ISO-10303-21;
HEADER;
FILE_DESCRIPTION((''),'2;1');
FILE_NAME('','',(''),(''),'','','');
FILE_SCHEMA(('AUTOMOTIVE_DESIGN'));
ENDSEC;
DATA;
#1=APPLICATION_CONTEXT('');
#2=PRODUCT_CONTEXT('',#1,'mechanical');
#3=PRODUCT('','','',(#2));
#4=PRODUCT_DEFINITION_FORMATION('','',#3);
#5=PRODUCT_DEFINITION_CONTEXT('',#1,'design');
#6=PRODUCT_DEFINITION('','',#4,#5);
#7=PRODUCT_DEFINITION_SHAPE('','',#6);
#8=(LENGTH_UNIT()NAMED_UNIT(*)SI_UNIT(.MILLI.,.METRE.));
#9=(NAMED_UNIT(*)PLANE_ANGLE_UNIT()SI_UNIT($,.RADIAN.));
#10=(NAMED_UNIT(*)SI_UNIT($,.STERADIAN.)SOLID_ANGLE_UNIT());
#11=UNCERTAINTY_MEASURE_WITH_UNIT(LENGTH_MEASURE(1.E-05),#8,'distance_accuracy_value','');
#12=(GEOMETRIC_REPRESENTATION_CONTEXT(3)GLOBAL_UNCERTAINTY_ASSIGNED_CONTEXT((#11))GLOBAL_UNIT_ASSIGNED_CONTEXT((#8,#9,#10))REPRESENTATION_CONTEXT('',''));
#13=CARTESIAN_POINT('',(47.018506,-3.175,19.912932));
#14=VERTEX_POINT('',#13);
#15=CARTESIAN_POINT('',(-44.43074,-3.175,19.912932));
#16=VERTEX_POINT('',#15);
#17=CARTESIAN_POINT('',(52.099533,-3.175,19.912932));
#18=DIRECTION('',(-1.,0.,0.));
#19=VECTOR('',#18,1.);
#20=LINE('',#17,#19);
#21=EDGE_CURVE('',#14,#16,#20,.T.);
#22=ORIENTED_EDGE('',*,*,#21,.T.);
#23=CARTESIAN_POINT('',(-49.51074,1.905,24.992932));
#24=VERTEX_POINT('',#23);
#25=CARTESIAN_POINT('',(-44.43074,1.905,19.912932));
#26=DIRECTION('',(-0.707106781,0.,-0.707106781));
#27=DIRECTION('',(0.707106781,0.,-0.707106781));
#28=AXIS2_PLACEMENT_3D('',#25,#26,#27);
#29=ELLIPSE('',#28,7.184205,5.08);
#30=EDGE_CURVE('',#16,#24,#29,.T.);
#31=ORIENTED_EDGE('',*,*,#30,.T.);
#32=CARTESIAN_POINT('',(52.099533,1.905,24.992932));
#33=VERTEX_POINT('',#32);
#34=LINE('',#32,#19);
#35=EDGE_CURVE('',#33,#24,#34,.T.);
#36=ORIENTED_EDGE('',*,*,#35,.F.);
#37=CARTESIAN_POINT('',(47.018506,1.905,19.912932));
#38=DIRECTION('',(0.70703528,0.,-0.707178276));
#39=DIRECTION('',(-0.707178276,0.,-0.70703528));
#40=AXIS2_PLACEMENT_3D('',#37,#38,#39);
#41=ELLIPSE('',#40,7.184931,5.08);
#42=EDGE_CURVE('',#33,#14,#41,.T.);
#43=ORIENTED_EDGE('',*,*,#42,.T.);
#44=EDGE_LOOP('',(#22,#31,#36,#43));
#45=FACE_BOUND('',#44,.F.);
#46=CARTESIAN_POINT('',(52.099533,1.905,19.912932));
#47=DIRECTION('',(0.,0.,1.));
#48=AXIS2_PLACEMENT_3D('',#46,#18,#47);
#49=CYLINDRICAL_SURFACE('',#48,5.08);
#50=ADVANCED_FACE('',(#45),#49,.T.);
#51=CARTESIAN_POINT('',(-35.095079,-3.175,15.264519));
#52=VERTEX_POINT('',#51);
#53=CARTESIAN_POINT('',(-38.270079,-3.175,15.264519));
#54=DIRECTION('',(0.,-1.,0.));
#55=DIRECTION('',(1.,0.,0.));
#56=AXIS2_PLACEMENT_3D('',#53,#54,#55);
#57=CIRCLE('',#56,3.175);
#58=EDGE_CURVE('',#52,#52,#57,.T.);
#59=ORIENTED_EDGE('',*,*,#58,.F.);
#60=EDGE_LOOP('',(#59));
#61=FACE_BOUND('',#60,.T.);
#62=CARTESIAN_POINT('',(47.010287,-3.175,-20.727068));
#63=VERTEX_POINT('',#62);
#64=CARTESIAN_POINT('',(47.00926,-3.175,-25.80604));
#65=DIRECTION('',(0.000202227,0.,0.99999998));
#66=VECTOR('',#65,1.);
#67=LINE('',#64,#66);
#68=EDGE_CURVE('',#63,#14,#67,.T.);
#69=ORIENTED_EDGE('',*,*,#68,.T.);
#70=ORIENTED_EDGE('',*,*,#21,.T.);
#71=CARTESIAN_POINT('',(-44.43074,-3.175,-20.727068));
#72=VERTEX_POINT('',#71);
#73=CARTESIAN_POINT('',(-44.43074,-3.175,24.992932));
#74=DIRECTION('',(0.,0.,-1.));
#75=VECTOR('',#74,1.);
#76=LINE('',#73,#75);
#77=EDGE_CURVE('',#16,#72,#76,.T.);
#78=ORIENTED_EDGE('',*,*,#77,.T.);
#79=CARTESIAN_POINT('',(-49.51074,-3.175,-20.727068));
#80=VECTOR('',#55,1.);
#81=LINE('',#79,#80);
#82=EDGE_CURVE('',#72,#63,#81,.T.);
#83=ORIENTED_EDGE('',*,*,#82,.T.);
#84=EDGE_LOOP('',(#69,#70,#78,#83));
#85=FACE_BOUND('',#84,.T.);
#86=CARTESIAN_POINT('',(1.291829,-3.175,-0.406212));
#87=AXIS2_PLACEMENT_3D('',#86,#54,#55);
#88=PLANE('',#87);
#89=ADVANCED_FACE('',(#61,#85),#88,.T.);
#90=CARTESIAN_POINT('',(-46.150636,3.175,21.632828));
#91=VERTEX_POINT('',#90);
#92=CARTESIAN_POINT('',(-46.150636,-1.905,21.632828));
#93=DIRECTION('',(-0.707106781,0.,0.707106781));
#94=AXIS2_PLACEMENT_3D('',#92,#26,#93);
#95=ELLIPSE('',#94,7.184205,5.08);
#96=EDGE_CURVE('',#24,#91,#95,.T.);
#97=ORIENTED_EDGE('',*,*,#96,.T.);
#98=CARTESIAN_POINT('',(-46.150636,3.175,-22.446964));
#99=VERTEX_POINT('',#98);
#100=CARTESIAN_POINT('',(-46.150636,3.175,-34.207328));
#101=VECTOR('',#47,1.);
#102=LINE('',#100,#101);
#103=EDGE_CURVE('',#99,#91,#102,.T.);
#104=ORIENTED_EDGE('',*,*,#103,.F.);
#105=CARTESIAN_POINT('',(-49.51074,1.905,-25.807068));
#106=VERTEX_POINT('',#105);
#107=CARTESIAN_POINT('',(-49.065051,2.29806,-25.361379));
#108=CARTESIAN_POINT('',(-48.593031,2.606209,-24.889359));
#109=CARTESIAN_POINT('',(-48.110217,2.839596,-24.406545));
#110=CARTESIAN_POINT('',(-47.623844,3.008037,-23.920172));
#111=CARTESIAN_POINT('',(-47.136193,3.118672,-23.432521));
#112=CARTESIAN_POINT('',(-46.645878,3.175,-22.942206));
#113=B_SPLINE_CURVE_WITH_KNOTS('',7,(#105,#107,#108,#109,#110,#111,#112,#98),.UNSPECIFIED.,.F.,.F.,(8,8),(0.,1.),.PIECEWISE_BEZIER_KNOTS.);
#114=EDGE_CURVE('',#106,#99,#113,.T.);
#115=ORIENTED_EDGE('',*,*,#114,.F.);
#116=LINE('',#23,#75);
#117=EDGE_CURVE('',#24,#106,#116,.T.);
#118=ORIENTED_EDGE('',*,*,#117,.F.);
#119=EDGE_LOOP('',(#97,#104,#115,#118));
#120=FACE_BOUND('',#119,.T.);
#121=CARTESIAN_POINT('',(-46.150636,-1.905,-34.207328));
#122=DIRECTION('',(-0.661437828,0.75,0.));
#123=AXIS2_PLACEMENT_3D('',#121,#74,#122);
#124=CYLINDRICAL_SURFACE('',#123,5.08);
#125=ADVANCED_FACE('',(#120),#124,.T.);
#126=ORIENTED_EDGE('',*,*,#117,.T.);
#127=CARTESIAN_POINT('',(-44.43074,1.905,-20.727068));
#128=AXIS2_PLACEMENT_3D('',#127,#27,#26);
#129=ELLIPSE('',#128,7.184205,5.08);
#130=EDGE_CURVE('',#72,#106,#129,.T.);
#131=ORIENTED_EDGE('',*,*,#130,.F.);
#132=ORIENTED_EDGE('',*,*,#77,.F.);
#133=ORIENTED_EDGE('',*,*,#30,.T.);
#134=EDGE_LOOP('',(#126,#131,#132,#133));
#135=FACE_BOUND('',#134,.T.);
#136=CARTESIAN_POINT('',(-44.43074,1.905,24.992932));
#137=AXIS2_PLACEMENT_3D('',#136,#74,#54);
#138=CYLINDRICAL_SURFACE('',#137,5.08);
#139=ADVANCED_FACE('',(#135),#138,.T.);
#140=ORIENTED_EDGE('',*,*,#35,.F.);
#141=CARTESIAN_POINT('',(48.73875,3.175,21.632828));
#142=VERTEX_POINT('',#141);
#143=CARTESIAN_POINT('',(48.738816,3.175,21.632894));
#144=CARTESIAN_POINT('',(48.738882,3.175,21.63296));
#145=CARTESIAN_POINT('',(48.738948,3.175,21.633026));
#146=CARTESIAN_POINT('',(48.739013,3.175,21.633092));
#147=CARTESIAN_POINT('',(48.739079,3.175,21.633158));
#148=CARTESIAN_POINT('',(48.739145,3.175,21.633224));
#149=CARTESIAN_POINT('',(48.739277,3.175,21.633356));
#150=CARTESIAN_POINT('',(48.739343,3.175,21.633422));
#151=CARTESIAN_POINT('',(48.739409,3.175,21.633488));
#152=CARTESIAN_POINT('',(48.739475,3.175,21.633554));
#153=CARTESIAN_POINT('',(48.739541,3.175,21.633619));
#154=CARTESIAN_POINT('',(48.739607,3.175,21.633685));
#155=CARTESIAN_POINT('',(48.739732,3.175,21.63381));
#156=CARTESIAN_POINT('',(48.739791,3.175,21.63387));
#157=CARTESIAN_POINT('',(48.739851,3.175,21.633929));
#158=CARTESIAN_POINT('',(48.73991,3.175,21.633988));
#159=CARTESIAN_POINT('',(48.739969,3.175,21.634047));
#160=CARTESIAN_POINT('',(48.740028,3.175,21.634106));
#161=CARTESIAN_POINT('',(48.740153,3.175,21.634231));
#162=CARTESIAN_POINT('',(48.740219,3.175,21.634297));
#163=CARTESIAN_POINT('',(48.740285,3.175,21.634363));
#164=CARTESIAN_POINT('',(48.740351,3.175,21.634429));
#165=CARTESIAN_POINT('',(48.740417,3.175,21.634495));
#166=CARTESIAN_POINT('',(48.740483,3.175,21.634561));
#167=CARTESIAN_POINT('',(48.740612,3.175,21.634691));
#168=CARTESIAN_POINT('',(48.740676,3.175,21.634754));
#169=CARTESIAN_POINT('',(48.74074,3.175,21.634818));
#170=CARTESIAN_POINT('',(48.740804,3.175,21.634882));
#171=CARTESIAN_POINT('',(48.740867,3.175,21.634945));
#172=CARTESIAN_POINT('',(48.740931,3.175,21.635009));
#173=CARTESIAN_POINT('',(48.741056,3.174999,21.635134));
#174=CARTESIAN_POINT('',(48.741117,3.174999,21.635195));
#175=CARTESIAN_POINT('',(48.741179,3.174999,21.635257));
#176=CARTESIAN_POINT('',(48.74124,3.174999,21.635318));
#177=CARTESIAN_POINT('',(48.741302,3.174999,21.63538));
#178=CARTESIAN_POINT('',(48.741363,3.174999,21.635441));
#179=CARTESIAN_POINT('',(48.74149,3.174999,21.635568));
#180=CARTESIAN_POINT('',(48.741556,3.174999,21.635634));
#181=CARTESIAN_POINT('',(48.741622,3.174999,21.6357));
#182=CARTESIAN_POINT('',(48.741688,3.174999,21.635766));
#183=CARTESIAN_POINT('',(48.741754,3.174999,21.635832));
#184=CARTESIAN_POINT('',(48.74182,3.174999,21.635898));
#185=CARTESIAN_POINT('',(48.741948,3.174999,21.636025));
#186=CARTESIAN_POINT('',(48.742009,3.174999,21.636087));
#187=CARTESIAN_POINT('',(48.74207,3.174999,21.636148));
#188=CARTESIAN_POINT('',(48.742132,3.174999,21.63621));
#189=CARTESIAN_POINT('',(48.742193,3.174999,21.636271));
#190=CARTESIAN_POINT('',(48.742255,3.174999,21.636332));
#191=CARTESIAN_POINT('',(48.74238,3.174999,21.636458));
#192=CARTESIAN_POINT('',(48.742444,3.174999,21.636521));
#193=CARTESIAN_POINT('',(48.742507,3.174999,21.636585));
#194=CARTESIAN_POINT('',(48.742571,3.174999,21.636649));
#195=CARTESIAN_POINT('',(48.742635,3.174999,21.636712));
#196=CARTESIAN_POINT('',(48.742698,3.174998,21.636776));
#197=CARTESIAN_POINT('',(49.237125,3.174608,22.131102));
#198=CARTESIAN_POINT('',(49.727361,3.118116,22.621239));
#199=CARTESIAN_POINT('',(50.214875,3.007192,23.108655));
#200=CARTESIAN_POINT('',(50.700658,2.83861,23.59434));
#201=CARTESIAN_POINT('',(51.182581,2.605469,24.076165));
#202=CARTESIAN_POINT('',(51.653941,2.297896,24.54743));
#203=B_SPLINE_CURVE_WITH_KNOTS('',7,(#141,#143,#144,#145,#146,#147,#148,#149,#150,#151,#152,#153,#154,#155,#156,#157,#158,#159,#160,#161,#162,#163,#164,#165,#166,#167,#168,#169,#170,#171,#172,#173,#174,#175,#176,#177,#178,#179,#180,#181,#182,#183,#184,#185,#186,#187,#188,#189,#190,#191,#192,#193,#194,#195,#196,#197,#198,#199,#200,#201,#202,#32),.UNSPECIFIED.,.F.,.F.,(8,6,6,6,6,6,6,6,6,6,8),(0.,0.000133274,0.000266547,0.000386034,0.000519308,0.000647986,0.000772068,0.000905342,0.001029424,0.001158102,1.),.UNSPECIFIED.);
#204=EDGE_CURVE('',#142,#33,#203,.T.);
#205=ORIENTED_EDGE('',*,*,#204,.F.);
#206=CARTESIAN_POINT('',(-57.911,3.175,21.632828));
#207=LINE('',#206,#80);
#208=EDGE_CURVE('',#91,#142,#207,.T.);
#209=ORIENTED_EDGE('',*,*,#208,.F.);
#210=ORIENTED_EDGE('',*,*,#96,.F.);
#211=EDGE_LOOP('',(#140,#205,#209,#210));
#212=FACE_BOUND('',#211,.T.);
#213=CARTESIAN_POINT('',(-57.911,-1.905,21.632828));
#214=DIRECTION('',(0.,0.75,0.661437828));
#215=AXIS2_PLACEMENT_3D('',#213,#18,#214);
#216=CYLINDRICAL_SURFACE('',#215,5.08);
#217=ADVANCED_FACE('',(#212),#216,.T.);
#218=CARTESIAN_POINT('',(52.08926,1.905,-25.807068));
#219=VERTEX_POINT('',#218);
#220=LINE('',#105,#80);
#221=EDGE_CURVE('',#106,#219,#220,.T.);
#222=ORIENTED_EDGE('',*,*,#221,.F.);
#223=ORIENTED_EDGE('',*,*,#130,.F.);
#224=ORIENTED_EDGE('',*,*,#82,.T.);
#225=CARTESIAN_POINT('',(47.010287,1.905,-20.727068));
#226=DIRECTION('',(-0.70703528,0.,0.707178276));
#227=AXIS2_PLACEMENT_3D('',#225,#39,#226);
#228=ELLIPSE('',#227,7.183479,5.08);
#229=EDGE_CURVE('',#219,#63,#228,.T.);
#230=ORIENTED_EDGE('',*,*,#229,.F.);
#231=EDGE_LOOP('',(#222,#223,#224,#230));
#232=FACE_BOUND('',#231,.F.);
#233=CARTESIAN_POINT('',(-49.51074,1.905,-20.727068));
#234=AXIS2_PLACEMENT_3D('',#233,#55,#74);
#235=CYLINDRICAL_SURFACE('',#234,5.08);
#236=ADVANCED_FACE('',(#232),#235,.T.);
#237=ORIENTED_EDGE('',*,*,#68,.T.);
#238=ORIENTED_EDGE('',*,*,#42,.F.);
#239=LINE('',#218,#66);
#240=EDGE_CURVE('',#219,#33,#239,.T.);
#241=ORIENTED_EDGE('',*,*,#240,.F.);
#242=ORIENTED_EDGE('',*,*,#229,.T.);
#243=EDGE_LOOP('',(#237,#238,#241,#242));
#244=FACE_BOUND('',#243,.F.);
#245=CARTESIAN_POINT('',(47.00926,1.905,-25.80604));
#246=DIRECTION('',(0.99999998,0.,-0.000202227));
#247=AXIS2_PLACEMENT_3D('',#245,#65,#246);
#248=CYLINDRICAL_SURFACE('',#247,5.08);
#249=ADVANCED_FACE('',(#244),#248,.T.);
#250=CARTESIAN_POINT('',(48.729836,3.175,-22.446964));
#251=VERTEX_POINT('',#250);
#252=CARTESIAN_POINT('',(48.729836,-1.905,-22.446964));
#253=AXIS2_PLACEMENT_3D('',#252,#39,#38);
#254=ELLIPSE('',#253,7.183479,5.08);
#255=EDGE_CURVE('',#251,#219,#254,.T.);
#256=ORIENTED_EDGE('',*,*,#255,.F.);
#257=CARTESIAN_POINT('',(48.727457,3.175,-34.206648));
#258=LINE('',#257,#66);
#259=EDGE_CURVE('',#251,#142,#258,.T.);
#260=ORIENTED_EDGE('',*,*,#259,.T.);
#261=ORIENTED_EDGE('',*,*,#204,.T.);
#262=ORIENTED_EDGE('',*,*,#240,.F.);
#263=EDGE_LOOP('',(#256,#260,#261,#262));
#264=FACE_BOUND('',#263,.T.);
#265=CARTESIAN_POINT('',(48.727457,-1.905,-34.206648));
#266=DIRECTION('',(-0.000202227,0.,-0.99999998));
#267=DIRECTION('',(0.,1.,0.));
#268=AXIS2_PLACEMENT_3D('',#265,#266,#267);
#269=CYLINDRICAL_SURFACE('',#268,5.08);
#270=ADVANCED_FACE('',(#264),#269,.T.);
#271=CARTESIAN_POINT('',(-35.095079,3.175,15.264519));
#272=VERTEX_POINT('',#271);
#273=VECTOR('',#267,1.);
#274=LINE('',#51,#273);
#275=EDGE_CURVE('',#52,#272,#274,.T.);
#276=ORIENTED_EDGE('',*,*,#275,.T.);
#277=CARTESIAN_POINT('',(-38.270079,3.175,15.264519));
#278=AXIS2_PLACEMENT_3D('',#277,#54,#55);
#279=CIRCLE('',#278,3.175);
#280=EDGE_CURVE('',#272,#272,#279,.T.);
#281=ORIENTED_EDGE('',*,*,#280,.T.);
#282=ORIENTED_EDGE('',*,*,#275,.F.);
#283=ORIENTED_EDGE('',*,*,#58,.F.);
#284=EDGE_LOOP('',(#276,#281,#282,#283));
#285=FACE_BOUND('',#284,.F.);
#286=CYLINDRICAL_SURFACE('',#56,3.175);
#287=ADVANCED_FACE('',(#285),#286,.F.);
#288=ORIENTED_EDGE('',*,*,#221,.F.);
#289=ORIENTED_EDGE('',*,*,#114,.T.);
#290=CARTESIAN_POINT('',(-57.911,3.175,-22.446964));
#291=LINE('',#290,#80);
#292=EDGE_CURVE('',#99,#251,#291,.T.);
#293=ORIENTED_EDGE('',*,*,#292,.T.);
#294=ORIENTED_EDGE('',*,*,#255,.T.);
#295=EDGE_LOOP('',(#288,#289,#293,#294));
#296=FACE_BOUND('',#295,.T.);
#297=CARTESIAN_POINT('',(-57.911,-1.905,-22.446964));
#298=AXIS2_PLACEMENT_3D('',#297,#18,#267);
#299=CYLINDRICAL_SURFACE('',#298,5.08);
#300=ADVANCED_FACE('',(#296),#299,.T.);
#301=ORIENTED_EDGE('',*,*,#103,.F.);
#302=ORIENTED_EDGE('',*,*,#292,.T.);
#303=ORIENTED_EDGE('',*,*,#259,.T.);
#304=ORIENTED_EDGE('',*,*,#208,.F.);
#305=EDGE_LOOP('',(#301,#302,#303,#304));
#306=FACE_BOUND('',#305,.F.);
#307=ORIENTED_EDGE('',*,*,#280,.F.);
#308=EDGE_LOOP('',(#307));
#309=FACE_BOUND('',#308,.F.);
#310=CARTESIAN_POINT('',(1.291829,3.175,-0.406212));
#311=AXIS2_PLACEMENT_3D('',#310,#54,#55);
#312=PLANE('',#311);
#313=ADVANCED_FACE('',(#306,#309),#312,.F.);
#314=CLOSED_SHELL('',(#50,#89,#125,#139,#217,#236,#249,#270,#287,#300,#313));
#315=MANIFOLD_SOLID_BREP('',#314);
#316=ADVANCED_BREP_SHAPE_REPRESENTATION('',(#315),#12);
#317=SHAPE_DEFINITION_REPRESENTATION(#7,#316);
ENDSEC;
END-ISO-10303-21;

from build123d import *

# Parameters (mm, degrees)
F1_DEPTH    = 3.175
F2_R        = 5.08
F3_R        = 3.175
F4_DEPTH    = 25.4
F5_T1_DEPTH = 118.410793948
F5_T3_DEPTH = 67.600521864
F5_T5_DEPTH = 118.4005208253
F5_T7_DEPTH = 67.6005208253


# Not quite as in the source:
# - a fillet or chamfer that OpenCascade refuses, or shapes differently, is made with other operations: its cross-section is extruded or revolved along the edge and cut away or added


with BuildPart() as f1:
    # F0 (on Front) → F1 (new body, symmetric)
    with BuildSketch(Plane.XZ):
        Polygon((52.0995333791, 24.9929322481), (-49.5107397437, 24.9929322481), (-49.5107397437, -25.8070677519), (52.0892602563, -25.8070677519), align=None)
    extrude(amount=F1_DEPTH, both=True)

    # F2
    f2_edges = [f1.edges().sort_by_distance(p)[0] for p in [
        (-49.51074, -3.175, -0.407068),
        (1.294397, -3.175, 24.992932),
        (52.094397, -3.175, -0.407068),
        (1.28926, -3.175, -25.807068),
    ]]
    fillet(f2_edges, radius=F2_R)

    # F3 (on face) → F4 (cut)
    with BuildSketch(Plane.XZ.offset(3.175)):
        with Locations((-38.2700785995, 15.264518559)):
            Circle(F3_R)
    extrude(amount=-F4_DEPTH, mode=Mode.SUBTRACT)

    # F5: fillet of radius 5.08 on 4 edges, made by hand

    # F5_s2 → F5_t1 (cut)
    with BuildSketch(Plane.YZ.offset(-57.9110001563)):
        with BuildLine():
            ThreePointArc((1.905, 24.9929322481), (2.8469048812, 23.4288793073), (3.175, 21.6328280831))
            Line((3.175, 21.6328280831), (3.175, 24.9929322481))
            Line((3.175, 24.9929322481), (1.905, 24.9929322481))
        make_face()
    extrude(amount=F5_T1_DEPTH, mode=Mode.SUBTRACT)

    # F5_s4 → F5_t3 (cut)
    with BuildSketch(Plane(origin=(-0.0069155089, 0, -34.196793092), x_dir=(0, 1, 0), z_dir=(0.0002022268, 0, 0.9999999796))):
        with BuildLine():
            ThreePointArc((3.175, -48.7343739074), (2.8469048812, -50.5304251316), (1.905, -52.0944780725))
            Line((1.905, -52.0944780725), (3.175, -52.0944780725))
            Line((3.175, -52.0944780725), (3.175, -48.7343739074))
        make_face()
    extrude(amount=F5_T3_DEPTH, mode=Mode.SUBTRACT)

    # F5_s6 → F5_t5 (cut)
    with BuildSketch(Plane.YZ.offset(-57.9110001563)):
        with BuildLine():
            ThreePointArc((3.175, -22.4469635868), (2.8469048812, -24.243014811), (1.905, -25.8070677519))
            Line((1.905, -25.8070677519), (3.175, -25.8070677519))
            Line((3.175, -25.8070677519), (3.175, -22.4469635868))
        make_face()
    extrude(amount=F5_T5_DEPTH, mode=Mode.SUBTRACT)

    # F5_s8 → F5_t7 (cut)
    with BuildSketch(Plane.XY.offset(-34.2073281645)):
        with BuildLine():
            ThreePointArc((-49.5107397437, 1.905), (-47.9466868029, 2.8469048812), (-46.1506355787, 3.175))
            Line((-46.1506355787, 3.175), (-49.5107397437, 3.175))
            Line((-49.5107397437, 3.175), (-49.5107397437, 1.905))
        make_face()
    extrude(amount=F5_T7_DEPTH, mode=Mode.SUBTRACT)


solid = f1.part
